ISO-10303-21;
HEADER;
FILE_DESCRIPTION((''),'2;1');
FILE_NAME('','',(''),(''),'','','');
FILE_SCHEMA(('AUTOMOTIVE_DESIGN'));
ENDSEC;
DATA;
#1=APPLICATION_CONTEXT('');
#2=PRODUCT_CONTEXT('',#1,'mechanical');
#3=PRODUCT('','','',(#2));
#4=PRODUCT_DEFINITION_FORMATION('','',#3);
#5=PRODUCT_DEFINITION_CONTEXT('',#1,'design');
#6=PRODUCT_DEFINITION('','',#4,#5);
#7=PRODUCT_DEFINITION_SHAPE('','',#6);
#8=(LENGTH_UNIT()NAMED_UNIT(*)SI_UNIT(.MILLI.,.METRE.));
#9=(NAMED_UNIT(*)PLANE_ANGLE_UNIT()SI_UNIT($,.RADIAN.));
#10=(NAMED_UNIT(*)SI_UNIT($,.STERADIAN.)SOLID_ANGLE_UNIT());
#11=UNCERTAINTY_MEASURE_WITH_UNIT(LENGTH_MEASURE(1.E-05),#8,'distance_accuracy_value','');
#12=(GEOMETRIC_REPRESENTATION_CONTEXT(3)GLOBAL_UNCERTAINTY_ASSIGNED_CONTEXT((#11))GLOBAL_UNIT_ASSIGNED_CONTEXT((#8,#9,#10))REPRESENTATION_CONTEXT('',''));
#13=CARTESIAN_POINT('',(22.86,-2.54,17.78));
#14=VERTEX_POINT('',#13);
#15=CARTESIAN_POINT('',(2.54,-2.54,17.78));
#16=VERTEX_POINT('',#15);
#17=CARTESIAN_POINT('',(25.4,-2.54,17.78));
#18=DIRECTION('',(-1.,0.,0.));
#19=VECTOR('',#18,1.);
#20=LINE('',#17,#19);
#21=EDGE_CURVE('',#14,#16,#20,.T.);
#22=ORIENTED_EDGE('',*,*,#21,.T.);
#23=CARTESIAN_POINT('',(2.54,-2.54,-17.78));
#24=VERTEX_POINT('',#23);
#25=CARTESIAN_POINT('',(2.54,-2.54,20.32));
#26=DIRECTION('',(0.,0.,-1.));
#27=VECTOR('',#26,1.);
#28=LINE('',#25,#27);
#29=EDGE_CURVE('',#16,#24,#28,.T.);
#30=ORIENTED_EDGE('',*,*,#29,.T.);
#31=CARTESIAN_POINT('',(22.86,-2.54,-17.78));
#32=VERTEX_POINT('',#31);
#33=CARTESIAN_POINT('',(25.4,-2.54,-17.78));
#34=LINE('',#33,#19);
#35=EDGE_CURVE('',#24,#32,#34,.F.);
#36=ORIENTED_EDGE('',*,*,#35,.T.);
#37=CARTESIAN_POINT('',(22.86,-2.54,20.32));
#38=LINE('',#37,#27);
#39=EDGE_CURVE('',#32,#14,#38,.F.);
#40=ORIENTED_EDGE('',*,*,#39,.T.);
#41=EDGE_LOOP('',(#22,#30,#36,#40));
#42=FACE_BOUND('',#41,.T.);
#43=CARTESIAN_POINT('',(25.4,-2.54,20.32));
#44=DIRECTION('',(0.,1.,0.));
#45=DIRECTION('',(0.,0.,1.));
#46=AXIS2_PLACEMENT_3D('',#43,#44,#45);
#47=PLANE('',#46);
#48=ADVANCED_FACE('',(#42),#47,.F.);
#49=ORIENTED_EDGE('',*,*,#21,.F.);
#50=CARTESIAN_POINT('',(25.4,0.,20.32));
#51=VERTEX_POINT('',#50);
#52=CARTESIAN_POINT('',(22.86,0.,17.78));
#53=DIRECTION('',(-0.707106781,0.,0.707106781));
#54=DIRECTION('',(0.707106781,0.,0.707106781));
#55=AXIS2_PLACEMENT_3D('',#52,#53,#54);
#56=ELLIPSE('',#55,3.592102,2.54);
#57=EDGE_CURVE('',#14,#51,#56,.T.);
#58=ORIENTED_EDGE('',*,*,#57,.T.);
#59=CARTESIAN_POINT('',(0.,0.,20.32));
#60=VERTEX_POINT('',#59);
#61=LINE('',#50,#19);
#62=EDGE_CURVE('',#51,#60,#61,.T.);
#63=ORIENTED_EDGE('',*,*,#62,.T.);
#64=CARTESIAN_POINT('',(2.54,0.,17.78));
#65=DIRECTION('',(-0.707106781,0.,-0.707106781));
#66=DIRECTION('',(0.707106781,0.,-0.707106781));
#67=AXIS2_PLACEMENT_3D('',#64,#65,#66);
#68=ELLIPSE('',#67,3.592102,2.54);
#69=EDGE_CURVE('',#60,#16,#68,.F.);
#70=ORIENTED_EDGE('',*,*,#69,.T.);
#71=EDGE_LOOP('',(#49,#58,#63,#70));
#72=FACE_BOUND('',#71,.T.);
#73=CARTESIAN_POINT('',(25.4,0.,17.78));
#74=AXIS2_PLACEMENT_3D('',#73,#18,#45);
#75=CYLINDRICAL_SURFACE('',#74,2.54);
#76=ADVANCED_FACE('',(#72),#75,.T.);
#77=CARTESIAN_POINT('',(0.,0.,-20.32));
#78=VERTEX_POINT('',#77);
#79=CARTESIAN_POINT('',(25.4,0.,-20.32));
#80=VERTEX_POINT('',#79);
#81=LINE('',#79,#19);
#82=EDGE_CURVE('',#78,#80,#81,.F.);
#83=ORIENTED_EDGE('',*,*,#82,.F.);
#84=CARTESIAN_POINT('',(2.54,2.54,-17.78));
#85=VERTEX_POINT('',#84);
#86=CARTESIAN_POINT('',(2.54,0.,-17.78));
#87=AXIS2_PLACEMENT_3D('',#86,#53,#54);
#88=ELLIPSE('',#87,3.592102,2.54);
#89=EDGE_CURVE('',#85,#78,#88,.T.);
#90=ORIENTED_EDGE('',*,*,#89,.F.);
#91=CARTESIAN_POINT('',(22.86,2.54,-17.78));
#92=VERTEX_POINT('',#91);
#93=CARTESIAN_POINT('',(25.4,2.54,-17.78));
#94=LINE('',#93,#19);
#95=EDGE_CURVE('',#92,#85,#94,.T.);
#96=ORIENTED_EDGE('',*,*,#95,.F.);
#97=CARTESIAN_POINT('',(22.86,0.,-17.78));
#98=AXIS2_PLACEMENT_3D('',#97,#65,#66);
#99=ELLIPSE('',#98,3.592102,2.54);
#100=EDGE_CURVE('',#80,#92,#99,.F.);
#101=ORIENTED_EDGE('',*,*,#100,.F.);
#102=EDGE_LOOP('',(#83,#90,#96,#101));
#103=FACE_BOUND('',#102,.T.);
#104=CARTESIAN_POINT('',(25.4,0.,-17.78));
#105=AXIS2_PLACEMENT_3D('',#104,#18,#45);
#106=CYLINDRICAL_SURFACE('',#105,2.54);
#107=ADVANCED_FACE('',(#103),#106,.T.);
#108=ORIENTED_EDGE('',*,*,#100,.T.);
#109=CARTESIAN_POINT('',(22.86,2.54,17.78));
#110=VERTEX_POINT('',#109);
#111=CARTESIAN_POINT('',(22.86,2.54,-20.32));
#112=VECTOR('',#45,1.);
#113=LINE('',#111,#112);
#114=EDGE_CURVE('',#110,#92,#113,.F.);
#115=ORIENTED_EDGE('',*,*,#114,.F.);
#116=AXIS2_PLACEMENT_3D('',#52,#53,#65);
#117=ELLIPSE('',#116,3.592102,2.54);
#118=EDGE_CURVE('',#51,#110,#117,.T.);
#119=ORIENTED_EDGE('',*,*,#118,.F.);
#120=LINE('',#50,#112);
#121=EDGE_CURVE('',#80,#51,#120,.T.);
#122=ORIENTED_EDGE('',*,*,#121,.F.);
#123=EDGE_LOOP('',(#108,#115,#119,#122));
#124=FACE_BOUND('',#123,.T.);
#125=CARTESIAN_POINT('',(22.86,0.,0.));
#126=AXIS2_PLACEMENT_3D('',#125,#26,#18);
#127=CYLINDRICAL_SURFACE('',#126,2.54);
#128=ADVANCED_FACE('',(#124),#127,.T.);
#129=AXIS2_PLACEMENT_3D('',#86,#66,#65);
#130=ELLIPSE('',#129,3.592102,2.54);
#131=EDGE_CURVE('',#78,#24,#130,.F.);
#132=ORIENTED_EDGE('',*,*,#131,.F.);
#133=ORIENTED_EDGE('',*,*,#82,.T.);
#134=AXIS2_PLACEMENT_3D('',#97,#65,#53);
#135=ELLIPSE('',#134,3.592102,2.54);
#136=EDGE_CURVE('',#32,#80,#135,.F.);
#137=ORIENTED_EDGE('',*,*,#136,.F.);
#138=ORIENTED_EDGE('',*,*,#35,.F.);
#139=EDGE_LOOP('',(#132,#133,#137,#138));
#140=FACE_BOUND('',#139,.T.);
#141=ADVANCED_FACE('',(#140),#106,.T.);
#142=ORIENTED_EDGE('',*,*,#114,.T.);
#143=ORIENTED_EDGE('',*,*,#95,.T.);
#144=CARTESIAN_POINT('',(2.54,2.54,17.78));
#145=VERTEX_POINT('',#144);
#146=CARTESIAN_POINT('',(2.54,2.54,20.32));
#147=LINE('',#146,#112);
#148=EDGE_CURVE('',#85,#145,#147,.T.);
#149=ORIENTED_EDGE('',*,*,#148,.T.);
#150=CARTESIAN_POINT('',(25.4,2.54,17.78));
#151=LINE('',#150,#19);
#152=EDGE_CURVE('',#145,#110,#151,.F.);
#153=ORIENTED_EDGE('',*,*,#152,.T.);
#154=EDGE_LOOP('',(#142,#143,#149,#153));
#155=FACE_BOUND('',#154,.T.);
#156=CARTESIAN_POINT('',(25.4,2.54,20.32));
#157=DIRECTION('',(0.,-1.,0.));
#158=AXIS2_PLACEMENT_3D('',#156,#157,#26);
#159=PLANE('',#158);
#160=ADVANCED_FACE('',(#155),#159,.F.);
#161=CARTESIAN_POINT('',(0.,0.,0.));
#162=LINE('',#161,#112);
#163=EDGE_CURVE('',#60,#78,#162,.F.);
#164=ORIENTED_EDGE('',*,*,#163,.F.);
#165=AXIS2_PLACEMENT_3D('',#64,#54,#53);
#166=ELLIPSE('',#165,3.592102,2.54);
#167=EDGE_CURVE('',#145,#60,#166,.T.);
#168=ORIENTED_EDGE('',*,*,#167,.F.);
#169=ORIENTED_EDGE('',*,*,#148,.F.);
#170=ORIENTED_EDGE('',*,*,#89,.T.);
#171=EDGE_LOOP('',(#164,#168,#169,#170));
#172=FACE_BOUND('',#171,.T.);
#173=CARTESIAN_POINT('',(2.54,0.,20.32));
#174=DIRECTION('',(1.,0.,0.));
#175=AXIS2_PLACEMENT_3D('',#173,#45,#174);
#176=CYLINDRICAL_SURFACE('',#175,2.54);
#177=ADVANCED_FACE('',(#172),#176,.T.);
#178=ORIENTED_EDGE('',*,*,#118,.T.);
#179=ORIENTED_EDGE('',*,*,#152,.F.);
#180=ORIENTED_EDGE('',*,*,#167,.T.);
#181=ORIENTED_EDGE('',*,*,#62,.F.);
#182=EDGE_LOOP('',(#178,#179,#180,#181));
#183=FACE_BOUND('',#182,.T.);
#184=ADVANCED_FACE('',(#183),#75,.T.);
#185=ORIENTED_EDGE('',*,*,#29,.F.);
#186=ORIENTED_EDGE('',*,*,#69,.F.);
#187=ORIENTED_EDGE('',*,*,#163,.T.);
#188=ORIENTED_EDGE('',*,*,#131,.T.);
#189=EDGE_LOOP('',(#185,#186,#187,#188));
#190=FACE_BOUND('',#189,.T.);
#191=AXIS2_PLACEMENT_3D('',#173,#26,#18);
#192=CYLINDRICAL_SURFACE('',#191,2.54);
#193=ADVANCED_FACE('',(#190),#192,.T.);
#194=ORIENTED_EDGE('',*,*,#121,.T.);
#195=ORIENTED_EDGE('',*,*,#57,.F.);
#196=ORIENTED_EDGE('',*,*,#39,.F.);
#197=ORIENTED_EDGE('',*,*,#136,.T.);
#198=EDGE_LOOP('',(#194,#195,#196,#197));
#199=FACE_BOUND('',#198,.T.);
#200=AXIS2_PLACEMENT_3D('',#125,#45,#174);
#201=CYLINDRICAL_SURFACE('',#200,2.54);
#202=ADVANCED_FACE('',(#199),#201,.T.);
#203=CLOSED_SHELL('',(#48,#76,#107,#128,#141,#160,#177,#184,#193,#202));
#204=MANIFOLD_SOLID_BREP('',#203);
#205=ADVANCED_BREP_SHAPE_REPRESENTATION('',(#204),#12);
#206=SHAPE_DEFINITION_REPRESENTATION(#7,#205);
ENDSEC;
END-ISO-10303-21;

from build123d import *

# Parameters (mm, degrees)
SKETCH2_W           = 40.64
SKETCH2_H           = 5.08
BOSS_EXTRUDE1_DEPTH = 25.4
FILLET1_R           = 2.54


with BuildPart() as part:
    # Sketch2 → Boss-Extrude1 (new body)
    with BuildSketch(Plane(origin=(0, 0, 0), x_dir=(0, 0, -1), z_dir=(1, 0, 0))):
        Rectangle(SKETCH2_W, SKETCH2_H)
    extrude(amount=BOSS_EXTRUDE1_DEPTH)

    # Fillet1
    fillet1_edges = [part.edges().sort_by_distance(p)[0] for p in [
        (12.7, -2.54, 20.32),
        (25.4, -2.54, 0),
        (12.7, -2.54, -20.32),
        (0, -2.54, 0),
        (12.7, 2.54, -20.32),
        (25.4, 2.54, 0),
        (12.7, 2.54, 20.32),
        (0, 2.54, 0),
    ]]
    fillet(fillet1_edges, radius=FILLET1_R - 0.0001)  # a hair under: the kernel refuses the full size


solid = part.part
